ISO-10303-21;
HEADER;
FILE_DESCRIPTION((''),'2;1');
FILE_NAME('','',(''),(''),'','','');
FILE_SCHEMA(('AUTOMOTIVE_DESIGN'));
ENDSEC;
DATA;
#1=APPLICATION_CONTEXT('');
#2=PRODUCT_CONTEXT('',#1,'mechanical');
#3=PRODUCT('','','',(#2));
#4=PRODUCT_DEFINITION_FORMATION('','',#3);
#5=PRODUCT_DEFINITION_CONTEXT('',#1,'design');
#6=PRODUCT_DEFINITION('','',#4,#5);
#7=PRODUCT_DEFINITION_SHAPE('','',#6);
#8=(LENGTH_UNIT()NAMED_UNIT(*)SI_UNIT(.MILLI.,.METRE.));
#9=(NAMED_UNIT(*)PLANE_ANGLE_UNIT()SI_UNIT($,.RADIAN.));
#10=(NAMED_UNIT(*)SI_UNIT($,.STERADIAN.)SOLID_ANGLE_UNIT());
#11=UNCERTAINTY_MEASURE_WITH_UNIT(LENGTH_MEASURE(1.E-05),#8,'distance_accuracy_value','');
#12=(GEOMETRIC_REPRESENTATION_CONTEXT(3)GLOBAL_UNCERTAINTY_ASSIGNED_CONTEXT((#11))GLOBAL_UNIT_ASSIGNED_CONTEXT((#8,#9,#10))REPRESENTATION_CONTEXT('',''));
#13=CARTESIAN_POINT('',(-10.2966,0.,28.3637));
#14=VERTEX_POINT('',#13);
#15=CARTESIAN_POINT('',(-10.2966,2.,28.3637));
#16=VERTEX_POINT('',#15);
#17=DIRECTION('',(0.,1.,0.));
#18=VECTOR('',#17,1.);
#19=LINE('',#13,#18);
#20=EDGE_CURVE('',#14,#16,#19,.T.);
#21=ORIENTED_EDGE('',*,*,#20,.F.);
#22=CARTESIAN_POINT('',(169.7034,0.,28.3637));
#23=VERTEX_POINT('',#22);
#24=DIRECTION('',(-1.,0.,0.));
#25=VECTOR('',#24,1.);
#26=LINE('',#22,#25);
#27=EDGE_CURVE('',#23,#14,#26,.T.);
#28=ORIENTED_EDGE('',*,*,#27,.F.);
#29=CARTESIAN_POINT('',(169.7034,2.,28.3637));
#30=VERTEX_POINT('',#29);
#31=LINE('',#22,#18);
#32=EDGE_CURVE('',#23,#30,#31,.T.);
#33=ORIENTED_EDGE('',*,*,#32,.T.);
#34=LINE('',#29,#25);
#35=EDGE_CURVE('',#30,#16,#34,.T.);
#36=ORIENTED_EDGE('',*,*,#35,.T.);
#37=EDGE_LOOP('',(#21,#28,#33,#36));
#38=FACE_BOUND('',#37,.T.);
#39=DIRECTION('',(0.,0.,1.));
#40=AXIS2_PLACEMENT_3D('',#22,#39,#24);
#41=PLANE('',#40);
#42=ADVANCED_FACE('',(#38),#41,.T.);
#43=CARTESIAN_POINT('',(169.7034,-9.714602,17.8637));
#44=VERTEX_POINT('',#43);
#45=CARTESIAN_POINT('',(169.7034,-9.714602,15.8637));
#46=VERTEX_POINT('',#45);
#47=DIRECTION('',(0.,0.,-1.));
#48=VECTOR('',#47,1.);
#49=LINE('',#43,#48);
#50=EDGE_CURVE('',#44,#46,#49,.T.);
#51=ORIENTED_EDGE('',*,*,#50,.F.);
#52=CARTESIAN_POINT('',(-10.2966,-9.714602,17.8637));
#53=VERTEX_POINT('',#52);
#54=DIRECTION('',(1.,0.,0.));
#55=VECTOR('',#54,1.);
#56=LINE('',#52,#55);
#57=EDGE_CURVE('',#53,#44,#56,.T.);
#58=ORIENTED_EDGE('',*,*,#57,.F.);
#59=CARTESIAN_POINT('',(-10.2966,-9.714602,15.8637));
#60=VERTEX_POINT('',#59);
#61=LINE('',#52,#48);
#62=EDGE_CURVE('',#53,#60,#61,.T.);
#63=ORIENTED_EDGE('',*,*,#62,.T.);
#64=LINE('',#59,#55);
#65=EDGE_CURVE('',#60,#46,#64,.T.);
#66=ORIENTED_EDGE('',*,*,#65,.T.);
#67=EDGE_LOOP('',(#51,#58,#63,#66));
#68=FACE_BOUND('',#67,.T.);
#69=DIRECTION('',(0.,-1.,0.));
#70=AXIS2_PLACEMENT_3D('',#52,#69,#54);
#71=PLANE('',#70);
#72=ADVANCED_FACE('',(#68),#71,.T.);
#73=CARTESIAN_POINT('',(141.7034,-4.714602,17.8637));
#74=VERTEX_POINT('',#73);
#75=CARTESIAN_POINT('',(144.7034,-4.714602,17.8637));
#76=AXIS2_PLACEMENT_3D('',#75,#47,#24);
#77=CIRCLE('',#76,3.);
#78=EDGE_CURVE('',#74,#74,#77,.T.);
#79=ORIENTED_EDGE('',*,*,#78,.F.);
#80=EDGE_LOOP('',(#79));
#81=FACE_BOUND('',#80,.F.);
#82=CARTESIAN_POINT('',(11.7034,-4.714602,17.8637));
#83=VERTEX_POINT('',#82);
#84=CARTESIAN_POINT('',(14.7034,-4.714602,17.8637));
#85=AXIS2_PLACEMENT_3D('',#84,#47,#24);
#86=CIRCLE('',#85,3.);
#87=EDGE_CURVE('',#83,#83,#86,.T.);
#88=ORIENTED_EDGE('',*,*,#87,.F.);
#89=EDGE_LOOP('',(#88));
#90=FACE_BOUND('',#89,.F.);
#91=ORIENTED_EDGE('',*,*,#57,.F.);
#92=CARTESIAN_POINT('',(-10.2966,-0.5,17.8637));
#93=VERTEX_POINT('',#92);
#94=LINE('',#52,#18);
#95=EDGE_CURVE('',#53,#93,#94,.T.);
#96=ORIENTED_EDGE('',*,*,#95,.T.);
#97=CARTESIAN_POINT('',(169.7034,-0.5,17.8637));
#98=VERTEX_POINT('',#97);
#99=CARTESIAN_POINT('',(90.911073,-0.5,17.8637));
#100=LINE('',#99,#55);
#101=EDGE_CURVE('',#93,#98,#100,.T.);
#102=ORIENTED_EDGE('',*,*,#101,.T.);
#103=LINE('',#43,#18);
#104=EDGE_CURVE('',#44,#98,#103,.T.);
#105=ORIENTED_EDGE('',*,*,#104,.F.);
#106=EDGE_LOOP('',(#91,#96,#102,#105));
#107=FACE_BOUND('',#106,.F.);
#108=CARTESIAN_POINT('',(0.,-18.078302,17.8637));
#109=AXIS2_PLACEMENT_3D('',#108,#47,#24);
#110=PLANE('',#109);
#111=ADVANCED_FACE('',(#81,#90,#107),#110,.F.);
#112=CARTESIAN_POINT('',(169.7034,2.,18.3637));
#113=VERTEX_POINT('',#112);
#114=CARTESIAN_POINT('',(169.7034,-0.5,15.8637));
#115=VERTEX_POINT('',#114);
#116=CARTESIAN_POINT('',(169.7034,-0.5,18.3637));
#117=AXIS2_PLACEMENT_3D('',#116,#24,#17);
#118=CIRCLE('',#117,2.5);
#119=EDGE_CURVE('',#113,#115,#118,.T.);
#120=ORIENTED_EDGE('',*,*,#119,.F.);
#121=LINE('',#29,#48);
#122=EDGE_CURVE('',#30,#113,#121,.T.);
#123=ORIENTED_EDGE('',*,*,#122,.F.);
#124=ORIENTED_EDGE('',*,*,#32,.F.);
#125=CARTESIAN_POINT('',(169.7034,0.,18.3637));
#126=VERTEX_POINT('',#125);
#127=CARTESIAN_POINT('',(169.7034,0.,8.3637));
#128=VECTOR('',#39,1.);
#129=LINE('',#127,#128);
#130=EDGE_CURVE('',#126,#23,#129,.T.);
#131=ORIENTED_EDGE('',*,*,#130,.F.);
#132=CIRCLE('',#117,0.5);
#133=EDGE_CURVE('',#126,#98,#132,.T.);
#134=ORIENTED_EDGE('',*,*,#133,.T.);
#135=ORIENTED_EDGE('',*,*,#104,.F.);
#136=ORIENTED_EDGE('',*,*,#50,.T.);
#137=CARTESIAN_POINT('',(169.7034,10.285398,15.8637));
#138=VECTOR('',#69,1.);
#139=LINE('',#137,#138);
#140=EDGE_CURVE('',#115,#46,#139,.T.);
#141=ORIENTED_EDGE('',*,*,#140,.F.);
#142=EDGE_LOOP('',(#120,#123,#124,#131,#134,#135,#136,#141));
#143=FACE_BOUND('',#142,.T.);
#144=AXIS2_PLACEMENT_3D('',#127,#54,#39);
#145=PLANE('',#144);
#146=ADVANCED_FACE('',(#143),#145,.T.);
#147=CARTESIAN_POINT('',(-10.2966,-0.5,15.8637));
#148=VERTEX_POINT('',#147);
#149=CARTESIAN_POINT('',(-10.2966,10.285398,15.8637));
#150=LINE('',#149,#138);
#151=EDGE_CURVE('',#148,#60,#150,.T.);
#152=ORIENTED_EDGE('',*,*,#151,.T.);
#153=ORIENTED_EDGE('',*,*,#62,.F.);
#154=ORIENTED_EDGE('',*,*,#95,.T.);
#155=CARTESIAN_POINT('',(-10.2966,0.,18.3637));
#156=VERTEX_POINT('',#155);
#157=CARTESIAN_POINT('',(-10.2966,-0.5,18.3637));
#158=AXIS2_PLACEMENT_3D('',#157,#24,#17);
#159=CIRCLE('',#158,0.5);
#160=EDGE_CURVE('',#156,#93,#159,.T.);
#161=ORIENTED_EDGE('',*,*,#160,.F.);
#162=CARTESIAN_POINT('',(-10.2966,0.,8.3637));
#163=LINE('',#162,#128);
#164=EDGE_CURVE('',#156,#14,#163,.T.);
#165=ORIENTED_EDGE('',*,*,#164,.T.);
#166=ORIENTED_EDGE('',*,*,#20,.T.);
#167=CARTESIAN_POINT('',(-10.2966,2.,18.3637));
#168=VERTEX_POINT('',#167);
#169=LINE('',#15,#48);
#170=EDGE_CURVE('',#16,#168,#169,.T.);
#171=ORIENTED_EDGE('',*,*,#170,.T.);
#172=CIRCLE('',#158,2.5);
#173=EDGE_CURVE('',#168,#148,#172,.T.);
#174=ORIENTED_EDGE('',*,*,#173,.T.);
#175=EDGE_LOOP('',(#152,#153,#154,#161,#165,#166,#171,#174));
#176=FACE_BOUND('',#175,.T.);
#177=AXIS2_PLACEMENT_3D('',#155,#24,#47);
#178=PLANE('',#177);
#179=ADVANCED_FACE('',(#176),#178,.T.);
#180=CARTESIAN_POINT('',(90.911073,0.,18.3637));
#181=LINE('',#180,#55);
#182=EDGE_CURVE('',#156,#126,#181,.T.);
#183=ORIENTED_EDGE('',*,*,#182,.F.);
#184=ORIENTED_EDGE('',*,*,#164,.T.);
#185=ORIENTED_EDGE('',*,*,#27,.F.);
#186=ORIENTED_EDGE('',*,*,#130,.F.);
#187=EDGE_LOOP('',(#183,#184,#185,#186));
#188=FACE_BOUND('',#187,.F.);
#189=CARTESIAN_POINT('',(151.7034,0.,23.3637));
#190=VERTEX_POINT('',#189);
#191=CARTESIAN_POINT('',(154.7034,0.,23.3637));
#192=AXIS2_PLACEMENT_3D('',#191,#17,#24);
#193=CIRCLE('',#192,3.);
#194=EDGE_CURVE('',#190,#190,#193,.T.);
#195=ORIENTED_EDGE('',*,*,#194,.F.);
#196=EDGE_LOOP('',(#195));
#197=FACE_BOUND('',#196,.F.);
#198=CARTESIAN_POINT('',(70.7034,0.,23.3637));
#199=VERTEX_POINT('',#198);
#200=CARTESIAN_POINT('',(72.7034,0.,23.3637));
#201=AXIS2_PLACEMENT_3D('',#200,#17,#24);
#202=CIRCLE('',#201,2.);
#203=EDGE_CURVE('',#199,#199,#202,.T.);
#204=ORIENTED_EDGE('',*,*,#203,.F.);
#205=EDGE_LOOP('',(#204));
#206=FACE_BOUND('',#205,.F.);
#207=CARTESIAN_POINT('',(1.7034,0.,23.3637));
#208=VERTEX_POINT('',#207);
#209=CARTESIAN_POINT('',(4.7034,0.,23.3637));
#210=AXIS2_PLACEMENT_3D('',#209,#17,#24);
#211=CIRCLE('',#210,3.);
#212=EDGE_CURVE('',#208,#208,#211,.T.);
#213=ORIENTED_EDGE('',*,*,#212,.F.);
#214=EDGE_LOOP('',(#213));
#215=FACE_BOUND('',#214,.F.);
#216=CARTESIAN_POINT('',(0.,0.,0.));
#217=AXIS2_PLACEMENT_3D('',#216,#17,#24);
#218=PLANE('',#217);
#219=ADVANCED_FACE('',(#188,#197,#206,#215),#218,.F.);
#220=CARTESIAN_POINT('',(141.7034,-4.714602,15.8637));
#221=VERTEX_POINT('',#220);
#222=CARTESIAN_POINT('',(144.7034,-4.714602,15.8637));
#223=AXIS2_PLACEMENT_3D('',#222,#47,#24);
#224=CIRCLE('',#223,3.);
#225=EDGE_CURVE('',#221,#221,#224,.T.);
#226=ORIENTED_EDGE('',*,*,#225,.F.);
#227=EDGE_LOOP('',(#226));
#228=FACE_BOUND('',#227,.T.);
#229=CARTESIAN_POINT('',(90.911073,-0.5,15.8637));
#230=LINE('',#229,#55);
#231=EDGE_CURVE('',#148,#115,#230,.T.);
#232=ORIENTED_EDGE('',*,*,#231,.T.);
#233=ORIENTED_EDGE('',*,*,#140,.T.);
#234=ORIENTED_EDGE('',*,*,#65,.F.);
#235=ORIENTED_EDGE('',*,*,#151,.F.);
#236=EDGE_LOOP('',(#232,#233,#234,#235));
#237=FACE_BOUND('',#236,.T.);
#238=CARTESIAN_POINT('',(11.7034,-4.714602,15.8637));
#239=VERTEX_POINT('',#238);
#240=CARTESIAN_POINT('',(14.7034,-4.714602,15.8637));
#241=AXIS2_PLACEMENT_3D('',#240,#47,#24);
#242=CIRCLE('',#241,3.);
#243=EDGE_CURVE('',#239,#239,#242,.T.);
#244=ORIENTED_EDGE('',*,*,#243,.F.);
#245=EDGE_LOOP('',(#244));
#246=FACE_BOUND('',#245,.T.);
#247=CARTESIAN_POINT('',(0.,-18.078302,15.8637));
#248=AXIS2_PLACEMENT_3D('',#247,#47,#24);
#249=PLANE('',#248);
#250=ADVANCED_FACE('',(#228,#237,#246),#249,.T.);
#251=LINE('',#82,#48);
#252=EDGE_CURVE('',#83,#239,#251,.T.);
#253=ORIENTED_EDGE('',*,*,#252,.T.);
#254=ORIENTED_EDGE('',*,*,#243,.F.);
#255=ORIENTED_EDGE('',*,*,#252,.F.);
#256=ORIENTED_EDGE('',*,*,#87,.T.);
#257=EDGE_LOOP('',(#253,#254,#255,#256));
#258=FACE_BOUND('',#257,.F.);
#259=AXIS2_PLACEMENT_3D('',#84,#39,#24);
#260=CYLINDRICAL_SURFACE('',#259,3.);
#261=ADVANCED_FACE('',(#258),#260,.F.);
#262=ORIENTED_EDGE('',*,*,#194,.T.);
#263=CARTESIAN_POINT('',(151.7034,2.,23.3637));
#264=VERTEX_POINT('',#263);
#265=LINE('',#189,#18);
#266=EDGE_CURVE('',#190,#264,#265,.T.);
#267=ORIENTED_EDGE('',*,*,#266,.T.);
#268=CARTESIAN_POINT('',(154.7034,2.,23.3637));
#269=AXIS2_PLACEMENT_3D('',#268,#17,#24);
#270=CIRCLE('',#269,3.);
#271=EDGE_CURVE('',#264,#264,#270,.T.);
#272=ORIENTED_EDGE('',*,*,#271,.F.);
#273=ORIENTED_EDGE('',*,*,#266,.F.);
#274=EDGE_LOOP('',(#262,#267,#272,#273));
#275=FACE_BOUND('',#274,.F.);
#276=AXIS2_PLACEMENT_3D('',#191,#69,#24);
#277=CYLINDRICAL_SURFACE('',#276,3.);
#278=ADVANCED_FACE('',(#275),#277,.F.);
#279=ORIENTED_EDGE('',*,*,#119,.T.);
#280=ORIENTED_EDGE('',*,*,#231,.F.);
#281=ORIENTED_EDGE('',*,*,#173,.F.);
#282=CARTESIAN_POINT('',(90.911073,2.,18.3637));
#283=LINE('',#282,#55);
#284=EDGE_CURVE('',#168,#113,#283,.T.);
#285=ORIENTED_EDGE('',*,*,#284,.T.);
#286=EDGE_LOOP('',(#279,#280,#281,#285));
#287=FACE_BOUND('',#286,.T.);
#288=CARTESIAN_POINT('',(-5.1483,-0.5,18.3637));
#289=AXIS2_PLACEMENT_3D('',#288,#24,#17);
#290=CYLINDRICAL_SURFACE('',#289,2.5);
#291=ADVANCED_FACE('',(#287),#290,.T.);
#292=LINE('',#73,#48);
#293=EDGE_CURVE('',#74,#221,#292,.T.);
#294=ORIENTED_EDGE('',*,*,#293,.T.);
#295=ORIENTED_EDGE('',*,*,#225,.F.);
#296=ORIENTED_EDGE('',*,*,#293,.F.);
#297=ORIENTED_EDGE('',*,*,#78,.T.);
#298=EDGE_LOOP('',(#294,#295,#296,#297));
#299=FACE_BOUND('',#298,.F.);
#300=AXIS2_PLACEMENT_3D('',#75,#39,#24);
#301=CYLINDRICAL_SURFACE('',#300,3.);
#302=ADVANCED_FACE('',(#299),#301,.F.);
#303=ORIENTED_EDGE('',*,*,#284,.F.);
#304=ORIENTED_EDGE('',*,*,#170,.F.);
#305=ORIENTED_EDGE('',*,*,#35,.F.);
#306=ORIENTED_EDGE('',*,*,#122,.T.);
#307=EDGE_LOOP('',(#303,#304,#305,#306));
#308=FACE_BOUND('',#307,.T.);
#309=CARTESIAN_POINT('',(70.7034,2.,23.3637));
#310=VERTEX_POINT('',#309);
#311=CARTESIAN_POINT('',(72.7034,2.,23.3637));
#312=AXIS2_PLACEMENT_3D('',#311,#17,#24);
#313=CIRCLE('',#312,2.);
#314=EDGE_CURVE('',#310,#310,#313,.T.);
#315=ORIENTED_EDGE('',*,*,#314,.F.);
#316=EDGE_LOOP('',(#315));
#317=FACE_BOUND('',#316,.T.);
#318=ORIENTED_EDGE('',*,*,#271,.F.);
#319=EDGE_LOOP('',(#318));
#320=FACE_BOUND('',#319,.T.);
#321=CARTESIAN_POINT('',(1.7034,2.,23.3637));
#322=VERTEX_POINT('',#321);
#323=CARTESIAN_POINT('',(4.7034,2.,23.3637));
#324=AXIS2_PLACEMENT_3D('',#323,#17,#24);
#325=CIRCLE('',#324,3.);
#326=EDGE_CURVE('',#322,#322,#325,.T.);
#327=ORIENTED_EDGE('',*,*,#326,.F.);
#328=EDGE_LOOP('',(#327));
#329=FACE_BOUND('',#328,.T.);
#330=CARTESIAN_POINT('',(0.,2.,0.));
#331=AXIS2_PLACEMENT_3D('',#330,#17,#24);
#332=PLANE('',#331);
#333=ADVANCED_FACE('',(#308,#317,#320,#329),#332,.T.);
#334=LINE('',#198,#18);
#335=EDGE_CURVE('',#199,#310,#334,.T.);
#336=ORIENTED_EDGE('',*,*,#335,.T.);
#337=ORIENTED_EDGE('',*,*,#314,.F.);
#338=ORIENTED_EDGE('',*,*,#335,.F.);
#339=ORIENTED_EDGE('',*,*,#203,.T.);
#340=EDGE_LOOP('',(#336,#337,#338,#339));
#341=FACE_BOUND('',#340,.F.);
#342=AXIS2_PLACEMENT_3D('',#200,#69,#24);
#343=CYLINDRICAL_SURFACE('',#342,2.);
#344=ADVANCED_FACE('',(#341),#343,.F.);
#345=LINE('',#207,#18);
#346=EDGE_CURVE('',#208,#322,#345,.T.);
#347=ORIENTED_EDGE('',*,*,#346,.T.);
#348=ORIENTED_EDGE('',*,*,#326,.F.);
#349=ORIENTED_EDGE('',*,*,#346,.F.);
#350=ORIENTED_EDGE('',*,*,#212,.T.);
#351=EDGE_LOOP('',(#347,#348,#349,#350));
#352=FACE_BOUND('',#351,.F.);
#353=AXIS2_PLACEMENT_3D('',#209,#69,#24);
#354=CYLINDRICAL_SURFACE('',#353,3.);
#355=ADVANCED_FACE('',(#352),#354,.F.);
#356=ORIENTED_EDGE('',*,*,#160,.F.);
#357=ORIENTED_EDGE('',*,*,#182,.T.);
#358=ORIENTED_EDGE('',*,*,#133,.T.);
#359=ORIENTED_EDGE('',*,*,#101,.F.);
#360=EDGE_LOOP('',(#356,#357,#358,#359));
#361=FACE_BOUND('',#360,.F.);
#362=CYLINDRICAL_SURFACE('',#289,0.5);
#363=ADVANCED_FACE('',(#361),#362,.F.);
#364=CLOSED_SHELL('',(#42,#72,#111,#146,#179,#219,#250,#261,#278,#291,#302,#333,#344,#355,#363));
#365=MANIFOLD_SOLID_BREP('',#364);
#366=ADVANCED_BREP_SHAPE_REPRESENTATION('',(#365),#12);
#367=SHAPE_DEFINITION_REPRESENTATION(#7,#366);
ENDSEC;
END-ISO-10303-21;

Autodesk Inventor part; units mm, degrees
ref_plane "YZ Plane" through (0, 0, 0) normal (1, 0, 0) x (0, 1, 0)
ref_plane "XZ Plane" through (0, 0, 0) normal (0, 1, 0) x (-1, 0, 0)
ref_plane "XY Plane" through (0, 0, 0) normal (0, 0, 1) x (1, 0, 0)
sketch "Boceto5" plane through (0, 0, 0) normal (0, 1, 0) x (-1, 0, 0)
  line L0 (10.2966, 28.3637) -> (10.2966, 8.3637)
  line L1 (10.2966, 8.3637) -> (-169.7034, 8.3637)
  line L2 (-169.7034, 8.3637) -> (-169.7034, 28.3637)
  line L3 (-169.7034, 28.3637) -> (10.2966, 28.3637)
  line L4 (10.2966, 18.3637) -> (-169.7034, 18.3637)
  circle A0 centre (-154.7034, 23.3637) radius 3
  circle A1 centre (-4.7034, 23.3637) radius 3
  circle A2 centre (-14.7034, 13.3637) radius 3
  circle A3 centre (-144.7034, 13.3637) radius 3
  circle A4 centre (-72.7034, 23.3637) radius 2
  point P0 (0, 0)
  dimension "d33" = 20
  dimension "d34" = 180
  dimension "d35" = 20
  dimension "d36" = 6
  dimension "d37" = 6
  dimension "d38" = 6
  dimension "d39" = 6
  dimension "d40" = 150
  dimension "d41" = 130
  dimension "d42" = 15
  dimension "d43" = 25
  dimension "d44" = 5
  dimension "d45" = 5
  dimension "d46" = 5
  dimension "d47" = 5
  dimension "d54" = 4
  dimension "d56" = 5
  dimension "d57" = 83
extrude "Extrusión4" add sketch "Boceto5" along normal blind 2 contours L0 L1 L2 L4
extrude "Extrusión5" add sketch "Boceto5" along normal blind 2 contours L0 L4 L2 L3
bend part "Pieza de plegado1" radius 0.5 angle 90 line through (-10.2966, 0, 18.3637) along (1, 0, 0) centre toward (0, -1, 0) moving side (0, 0, -1) both sides no
equation "\"Radio_pliegue\" = Grosor"
equation "\"Anchura_desahogo_plegado\" = Grosor"
equation "\"Profundidad_desahogo_plegado\" = 0.5 * Grosor"
equation "\"Tamaño_destalonado\" = 4 * Grosor"
equation "\"Remanente_mínimo\" = 2 * Grosor"
equation "\"Radiodetransición\" = Radio_pliegue"
equation "\"Tamaño_de_radio_de_Jacobi\" = Grosor"
equation "\"TamañoSeparación\" = Grosor"
equation "\"Grosor\" = 0.5"
properties part number "Soporte en L Frontal" material "Aluminum 1100-H14"
